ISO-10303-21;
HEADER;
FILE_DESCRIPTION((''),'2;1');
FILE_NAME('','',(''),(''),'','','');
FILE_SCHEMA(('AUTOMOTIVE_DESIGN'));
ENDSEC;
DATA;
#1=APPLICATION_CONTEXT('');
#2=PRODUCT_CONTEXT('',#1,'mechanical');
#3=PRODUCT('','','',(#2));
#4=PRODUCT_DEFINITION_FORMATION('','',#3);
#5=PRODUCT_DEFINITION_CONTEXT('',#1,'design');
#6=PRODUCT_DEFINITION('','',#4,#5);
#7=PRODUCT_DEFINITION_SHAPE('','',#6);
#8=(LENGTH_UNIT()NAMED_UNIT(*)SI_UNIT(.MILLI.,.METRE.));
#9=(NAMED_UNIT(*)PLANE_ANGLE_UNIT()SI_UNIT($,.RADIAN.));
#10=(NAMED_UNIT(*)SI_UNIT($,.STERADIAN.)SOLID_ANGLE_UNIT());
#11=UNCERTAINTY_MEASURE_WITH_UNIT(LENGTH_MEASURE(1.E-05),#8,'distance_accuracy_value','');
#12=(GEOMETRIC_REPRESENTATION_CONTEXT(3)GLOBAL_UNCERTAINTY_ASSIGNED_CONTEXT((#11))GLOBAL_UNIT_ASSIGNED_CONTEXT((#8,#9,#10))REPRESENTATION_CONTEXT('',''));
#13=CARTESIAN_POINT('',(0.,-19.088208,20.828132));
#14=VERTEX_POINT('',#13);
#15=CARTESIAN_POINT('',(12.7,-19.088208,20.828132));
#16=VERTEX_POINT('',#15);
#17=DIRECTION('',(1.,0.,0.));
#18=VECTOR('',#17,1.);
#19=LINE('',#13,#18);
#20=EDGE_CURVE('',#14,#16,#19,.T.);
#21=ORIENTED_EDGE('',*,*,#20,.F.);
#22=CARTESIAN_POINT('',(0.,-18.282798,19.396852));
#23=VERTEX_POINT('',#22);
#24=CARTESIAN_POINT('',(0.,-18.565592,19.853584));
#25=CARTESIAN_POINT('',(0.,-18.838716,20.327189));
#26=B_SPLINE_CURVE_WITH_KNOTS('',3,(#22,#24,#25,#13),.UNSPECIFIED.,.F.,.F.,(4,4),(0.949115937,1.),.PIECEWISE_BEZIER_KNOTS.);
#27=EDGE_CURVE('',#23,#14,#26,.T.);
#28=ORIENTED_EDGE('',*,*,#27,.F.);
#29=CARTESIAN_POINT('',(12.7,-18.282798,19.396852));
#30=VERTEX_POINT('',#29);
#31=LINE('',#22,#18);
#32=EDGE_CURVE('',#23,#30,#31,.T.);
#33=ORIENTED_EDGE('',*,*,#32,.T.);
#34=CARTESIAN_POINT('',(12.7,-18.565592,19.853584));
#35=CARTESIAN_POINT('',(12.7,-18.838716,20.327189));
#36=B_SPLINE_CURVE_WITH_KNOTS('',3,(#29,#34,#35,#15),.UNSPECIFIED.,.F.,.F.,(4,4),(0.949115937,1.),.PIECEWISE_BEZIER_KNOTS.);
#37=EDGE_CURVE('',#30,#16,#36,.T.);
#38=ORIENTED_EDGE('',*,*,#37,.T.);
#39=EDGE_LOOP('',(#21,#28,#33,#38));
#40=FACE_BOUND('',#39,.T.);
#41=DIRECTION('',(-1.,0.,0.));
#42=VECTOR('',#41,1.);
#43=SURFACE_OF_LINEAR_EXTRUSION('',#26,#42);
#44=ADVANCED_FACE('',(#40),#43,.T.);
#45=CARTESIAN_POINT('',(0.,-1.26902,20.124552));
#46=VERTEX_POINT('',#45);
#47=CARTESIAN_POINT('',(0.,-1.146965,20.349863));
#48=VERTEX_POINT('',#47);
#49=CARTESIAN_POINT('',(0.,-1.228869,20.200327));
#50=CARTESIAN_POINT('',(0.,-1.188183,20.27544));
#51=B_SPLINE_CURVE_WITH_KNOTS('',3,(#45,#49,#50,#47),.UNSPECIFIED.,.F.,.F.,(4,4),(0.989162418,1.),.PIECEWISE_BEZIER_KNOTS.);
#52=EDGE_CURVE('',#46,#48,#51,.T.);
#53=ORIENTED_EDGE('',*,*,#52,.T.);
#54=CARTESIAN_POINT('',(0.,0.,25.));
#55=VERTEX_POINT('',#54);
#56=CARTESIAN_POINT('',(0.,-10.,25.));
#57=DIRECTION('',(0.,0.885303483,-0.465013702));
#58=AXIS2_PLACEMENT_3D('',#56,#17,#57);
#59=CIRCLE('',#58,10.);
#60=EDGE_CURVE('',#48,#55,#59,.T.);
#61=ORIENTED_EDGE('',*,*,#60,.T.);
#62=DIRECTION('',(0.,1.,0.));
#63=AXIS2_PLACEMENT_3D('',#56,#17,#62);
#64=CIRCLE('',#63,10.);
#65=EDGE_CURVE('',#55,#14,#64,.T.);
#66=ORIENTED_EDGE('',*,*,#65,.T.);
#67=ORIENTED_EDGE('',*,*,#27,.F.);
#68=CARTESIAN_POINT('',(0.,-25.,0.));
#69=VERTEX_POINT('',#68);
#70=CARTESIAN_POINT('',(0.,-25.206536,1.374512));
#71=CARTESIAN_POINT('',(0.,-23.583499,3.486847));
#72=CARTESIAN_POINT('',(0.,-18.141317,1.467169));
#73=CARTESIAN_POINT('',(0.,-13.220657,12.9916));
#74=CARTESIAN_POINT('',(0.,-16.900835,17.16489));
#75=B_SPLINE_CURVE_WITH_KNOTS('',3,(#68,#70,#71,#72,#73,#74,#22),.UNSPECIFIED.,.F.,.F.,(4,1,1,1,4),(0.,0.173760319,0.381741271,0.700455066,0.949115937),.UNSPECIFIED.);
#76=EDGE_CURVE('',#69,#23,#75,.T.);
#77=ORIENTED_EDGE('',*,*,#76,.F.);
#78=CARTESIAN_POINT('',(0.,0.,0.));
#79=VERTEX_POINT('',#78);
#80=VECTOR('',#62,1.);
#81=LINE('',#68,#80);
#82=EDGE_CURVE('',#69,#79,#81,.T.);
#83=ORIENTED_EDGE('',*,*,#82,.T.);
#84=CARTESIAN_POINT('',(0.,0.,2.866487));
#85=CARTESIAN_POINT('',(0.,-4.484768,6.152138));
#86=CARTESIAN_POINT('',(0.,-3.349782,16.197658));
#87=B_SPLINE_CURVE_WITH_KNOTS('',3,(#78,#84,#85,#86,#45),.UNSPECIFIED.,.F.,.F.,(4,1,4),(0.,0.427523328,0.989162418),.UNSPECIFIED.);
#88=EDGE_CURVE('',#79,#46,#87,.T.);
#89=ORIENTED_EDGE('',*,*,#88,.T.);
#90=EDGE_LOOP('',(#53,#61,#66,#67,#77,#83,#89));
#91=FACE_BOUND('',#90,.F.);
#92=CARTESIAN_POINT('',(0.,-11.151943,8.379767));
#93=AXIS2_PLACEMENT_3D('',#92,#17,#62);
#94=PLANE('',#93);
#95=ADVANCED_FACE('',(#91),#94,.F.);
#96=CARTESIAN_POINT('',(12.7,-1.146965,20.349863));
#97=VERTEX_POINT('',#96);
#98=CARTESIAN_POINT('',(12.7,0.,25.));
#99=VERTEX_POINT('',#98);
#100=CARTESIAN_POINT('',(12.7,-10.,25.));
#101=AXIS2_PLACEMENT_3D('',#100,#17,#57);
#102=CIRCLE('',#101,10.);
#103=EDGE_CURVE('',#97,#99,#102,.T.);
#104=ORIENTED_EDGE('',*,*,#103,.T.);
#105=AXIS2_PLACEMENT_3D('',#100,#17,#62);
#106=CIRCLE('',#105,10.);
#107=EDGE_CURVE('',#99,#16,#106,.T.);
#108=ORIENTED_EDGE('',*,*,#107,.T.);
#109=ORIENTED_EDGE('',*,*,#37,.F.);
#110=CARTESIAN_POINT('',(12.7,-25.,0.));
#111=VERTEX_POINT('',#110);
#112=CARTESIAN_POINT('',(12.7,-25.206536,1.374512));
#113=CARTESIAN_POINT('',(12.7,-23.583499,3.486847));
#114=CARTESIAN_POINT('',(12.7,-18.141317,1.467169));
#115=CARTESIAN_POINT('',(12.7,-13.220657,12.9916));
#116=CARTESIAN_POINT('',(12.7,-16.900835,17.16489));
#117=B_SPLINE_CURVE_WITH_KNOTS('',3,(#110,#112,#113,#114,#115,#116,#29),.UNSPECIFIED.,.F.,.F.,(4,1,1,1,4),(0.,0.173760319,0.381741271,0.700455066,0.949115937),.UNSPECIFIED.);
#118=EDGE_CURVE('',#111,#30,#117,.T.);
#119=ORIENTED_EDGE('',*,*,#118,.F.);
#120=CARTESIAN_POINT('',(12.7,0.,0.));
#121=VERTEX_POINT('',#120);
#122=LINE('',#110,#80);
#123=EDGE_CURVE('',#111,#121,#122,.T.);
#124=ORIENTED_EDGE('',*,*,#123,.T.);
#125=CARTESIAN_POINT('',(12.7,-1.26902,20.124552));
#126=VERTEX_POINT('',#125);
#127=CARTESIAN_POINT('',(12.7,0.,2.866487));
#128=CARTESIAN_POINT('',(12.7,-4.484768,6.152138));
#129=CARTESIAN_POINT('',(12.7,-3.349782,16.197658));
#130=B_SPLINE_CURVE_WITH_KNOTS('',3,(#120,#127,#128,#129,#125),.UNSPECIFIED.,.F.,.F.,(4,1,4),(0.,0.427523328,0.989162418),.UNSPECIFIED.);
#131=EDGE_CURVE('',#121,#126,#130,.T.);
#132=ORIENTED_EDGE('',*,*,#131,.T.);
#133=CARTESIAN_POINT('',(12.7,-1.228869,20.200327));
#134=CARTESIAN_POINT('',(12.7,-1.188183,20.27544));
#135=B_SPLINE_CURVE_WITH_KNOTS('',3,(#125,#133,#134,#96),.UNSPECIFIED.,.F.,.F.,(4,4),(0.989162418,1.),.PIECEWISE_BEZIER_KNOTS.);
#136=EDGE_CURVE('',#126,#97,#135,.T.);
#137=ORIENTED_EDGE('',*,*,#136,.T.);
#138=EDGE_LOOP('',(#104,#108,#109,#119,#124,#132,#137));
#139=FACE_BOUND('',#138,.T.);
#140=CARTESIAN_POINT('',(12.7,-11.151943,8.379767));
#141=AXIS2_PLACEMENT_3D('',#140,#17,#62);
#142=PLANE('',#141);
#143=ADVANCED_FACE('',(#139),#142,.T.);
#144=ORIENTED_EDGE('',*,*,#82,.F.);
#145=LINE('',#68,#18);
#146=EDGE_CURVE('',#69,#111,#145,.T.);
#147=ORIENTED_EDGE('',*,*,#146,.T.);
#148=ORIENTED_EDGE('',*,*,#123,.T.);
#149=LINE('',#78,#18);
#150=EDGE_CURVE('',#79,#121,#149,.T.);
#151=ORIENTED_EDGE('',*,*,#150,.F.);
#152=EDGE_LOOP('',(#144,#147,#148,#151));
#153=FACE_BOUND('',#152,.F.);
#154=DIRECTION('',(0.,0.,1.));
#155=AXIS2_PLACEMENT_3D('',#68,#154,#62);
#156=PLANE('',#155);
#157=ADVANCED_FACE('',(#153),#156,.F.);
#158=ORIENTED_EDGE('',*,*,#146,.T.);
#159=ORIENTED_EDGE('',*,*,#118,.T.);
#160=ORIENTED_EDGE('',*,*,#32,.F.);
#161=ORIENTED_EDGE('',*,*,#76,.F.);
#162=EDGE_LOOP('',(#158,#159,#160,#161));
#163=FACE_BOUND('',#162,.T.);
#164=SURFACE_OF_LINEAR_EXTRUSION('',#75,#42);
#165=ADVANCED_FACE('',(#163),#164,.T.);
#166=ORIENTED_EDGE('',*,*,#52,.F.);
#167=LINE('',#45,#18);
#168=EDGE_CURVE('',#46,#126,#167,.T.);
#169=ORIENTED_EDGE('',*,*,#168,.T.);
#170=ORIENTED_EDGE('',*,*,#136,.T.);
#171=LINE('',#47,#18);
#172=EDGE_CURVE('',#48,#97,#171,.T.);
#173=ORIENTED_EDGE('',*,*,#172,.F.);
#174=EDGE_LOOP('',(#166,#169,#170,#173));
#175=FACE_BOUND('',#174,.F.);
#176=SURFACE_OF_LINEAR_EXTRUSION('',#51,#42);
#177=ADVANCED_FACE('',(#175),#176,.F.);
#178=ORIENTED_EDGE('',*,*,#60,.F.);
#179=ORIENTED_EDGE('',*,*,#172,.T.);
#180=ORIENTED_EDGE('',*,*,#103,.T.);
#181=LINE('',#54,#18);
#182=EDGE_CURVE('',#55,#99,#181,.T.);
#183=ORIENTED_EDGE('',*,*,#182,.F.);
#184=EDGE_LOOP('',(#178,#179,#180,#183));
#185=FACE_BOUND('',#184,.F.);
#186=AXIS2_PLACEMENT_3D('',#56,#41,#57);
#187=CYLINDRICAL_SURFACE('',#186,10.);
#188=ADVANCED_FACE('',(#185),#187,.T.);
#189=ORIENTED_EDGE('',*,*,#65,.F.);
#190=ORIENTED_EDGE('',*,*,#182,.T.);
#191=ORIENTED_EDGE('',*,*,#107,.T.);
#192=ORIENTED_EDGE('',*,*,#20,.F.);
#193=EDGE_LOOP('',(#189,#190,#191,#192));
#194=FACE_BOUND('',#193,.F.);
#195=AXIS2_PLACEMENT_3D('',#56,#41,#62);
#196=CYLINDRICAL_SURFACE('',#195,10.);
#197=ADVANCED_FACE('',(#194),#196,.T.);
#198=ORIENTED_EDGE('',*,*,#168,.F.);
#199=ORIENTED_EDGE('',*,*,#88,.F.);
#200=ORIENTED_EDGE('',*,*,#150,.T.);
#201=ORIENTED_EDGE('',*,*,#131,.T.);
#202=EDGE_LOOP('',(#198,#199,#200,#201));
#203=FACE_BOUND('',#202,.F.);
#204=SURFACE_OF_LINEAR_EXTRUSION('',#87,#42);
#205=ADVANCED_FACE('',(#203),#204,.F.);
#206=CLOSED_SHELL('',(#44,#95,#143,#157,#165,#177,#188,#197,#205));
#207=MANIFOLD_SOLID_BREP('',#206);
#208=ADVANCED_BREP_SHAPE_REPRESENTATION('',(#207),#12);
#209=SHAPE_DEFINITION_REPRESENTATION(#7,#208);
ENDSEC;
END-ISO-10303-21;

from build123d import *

# Parameters (mm, degrees)
F1_DEPTH = 12.7


# Not quite as in the source:
# - a feature names something its author has since deleted; it is built from what else it names


with BuildPart() as f1:
    # F0 (on Right) → F1 (new body)
    with BuildSketch(Plane.YZ):
        with BuildLine():
            Line((-25, 0), (0, 0))
            add(Edge.make_bspline(
                [(0, 0), (0, 2.8664874844), (-4.4847679358, 6.1521378453), (-3.3497820964, 16.197657633), (-1.2690202208, 20.1245521133)],
                knots=[0, 0, 0, 0, 0.4275233277, 0.9891624175, 0.9891624175, 0.9891624175, 0.9891624175], degree=3))
            ThreePointArc((-1.2690202208, 20.1245521133), (-9.5726785605, 15.0091343525), (-18.2827975356, 19.3968522253))
            add(Edge.make_bspline(
                [(-25, 0), (-25.2065360546, 1.3745123288), (-23.5834985534, 3.4868467231), (-18.1413165506, 1.4671690224), (-13.2206567534, 12.9916001305), (-16.9008347887, 17.1648896009), (-18.2827975356, 19.3968522253)],
                knots=[0, 0, 0, 0, 0.1737603194, 0.3817412709, 0.7004550662, 0.949115937, 0.949115937, 0.949115937, 0.949115937], degree=3))
        make_face()
        with BuildLine():
            ThreePointArc((-18.2827975356, 19.3968522253), (-9.5726785605, 15.0091343525), (-1.2690202208, 20.1245521133))
            add(Edge.make_bspline(
                [(-1.2690202208, 20.1245521133), (-1.2288691187, 20.2003268299), (-1.1881832022, 20.2754399281), (-1.1469651688, 20.3498629828)],
                knots=[0.9891624175, 0.9891624175, 0.9891624175, 0.9891624175, 1, 1, 1, 1], degree=3))
            ThreePointArc((-1.1469651688, 20.3498629828), (-0.2909746032, 22.6052503588), (0, 25))
            ThreePointArc((0, 25), (-12.1351726564, 34.7693929047), (-19.0882075454, 20.82813188))
            add(Edge.make_bspline(
                [(-18.2827975356, 19.3968522253), (-18.5655918459, 19.853584024), (-18.8387159675, 20.3271892353), (-19.0882075454, 20.82813188)],
                knots=[0.949115937, 0.949115937, 0.949115937, 0.949115937, 1, 1, 1, 1], degree=3))
        make_face()
    extrude(amount=F1_DEPTH)


solid = f1.part
